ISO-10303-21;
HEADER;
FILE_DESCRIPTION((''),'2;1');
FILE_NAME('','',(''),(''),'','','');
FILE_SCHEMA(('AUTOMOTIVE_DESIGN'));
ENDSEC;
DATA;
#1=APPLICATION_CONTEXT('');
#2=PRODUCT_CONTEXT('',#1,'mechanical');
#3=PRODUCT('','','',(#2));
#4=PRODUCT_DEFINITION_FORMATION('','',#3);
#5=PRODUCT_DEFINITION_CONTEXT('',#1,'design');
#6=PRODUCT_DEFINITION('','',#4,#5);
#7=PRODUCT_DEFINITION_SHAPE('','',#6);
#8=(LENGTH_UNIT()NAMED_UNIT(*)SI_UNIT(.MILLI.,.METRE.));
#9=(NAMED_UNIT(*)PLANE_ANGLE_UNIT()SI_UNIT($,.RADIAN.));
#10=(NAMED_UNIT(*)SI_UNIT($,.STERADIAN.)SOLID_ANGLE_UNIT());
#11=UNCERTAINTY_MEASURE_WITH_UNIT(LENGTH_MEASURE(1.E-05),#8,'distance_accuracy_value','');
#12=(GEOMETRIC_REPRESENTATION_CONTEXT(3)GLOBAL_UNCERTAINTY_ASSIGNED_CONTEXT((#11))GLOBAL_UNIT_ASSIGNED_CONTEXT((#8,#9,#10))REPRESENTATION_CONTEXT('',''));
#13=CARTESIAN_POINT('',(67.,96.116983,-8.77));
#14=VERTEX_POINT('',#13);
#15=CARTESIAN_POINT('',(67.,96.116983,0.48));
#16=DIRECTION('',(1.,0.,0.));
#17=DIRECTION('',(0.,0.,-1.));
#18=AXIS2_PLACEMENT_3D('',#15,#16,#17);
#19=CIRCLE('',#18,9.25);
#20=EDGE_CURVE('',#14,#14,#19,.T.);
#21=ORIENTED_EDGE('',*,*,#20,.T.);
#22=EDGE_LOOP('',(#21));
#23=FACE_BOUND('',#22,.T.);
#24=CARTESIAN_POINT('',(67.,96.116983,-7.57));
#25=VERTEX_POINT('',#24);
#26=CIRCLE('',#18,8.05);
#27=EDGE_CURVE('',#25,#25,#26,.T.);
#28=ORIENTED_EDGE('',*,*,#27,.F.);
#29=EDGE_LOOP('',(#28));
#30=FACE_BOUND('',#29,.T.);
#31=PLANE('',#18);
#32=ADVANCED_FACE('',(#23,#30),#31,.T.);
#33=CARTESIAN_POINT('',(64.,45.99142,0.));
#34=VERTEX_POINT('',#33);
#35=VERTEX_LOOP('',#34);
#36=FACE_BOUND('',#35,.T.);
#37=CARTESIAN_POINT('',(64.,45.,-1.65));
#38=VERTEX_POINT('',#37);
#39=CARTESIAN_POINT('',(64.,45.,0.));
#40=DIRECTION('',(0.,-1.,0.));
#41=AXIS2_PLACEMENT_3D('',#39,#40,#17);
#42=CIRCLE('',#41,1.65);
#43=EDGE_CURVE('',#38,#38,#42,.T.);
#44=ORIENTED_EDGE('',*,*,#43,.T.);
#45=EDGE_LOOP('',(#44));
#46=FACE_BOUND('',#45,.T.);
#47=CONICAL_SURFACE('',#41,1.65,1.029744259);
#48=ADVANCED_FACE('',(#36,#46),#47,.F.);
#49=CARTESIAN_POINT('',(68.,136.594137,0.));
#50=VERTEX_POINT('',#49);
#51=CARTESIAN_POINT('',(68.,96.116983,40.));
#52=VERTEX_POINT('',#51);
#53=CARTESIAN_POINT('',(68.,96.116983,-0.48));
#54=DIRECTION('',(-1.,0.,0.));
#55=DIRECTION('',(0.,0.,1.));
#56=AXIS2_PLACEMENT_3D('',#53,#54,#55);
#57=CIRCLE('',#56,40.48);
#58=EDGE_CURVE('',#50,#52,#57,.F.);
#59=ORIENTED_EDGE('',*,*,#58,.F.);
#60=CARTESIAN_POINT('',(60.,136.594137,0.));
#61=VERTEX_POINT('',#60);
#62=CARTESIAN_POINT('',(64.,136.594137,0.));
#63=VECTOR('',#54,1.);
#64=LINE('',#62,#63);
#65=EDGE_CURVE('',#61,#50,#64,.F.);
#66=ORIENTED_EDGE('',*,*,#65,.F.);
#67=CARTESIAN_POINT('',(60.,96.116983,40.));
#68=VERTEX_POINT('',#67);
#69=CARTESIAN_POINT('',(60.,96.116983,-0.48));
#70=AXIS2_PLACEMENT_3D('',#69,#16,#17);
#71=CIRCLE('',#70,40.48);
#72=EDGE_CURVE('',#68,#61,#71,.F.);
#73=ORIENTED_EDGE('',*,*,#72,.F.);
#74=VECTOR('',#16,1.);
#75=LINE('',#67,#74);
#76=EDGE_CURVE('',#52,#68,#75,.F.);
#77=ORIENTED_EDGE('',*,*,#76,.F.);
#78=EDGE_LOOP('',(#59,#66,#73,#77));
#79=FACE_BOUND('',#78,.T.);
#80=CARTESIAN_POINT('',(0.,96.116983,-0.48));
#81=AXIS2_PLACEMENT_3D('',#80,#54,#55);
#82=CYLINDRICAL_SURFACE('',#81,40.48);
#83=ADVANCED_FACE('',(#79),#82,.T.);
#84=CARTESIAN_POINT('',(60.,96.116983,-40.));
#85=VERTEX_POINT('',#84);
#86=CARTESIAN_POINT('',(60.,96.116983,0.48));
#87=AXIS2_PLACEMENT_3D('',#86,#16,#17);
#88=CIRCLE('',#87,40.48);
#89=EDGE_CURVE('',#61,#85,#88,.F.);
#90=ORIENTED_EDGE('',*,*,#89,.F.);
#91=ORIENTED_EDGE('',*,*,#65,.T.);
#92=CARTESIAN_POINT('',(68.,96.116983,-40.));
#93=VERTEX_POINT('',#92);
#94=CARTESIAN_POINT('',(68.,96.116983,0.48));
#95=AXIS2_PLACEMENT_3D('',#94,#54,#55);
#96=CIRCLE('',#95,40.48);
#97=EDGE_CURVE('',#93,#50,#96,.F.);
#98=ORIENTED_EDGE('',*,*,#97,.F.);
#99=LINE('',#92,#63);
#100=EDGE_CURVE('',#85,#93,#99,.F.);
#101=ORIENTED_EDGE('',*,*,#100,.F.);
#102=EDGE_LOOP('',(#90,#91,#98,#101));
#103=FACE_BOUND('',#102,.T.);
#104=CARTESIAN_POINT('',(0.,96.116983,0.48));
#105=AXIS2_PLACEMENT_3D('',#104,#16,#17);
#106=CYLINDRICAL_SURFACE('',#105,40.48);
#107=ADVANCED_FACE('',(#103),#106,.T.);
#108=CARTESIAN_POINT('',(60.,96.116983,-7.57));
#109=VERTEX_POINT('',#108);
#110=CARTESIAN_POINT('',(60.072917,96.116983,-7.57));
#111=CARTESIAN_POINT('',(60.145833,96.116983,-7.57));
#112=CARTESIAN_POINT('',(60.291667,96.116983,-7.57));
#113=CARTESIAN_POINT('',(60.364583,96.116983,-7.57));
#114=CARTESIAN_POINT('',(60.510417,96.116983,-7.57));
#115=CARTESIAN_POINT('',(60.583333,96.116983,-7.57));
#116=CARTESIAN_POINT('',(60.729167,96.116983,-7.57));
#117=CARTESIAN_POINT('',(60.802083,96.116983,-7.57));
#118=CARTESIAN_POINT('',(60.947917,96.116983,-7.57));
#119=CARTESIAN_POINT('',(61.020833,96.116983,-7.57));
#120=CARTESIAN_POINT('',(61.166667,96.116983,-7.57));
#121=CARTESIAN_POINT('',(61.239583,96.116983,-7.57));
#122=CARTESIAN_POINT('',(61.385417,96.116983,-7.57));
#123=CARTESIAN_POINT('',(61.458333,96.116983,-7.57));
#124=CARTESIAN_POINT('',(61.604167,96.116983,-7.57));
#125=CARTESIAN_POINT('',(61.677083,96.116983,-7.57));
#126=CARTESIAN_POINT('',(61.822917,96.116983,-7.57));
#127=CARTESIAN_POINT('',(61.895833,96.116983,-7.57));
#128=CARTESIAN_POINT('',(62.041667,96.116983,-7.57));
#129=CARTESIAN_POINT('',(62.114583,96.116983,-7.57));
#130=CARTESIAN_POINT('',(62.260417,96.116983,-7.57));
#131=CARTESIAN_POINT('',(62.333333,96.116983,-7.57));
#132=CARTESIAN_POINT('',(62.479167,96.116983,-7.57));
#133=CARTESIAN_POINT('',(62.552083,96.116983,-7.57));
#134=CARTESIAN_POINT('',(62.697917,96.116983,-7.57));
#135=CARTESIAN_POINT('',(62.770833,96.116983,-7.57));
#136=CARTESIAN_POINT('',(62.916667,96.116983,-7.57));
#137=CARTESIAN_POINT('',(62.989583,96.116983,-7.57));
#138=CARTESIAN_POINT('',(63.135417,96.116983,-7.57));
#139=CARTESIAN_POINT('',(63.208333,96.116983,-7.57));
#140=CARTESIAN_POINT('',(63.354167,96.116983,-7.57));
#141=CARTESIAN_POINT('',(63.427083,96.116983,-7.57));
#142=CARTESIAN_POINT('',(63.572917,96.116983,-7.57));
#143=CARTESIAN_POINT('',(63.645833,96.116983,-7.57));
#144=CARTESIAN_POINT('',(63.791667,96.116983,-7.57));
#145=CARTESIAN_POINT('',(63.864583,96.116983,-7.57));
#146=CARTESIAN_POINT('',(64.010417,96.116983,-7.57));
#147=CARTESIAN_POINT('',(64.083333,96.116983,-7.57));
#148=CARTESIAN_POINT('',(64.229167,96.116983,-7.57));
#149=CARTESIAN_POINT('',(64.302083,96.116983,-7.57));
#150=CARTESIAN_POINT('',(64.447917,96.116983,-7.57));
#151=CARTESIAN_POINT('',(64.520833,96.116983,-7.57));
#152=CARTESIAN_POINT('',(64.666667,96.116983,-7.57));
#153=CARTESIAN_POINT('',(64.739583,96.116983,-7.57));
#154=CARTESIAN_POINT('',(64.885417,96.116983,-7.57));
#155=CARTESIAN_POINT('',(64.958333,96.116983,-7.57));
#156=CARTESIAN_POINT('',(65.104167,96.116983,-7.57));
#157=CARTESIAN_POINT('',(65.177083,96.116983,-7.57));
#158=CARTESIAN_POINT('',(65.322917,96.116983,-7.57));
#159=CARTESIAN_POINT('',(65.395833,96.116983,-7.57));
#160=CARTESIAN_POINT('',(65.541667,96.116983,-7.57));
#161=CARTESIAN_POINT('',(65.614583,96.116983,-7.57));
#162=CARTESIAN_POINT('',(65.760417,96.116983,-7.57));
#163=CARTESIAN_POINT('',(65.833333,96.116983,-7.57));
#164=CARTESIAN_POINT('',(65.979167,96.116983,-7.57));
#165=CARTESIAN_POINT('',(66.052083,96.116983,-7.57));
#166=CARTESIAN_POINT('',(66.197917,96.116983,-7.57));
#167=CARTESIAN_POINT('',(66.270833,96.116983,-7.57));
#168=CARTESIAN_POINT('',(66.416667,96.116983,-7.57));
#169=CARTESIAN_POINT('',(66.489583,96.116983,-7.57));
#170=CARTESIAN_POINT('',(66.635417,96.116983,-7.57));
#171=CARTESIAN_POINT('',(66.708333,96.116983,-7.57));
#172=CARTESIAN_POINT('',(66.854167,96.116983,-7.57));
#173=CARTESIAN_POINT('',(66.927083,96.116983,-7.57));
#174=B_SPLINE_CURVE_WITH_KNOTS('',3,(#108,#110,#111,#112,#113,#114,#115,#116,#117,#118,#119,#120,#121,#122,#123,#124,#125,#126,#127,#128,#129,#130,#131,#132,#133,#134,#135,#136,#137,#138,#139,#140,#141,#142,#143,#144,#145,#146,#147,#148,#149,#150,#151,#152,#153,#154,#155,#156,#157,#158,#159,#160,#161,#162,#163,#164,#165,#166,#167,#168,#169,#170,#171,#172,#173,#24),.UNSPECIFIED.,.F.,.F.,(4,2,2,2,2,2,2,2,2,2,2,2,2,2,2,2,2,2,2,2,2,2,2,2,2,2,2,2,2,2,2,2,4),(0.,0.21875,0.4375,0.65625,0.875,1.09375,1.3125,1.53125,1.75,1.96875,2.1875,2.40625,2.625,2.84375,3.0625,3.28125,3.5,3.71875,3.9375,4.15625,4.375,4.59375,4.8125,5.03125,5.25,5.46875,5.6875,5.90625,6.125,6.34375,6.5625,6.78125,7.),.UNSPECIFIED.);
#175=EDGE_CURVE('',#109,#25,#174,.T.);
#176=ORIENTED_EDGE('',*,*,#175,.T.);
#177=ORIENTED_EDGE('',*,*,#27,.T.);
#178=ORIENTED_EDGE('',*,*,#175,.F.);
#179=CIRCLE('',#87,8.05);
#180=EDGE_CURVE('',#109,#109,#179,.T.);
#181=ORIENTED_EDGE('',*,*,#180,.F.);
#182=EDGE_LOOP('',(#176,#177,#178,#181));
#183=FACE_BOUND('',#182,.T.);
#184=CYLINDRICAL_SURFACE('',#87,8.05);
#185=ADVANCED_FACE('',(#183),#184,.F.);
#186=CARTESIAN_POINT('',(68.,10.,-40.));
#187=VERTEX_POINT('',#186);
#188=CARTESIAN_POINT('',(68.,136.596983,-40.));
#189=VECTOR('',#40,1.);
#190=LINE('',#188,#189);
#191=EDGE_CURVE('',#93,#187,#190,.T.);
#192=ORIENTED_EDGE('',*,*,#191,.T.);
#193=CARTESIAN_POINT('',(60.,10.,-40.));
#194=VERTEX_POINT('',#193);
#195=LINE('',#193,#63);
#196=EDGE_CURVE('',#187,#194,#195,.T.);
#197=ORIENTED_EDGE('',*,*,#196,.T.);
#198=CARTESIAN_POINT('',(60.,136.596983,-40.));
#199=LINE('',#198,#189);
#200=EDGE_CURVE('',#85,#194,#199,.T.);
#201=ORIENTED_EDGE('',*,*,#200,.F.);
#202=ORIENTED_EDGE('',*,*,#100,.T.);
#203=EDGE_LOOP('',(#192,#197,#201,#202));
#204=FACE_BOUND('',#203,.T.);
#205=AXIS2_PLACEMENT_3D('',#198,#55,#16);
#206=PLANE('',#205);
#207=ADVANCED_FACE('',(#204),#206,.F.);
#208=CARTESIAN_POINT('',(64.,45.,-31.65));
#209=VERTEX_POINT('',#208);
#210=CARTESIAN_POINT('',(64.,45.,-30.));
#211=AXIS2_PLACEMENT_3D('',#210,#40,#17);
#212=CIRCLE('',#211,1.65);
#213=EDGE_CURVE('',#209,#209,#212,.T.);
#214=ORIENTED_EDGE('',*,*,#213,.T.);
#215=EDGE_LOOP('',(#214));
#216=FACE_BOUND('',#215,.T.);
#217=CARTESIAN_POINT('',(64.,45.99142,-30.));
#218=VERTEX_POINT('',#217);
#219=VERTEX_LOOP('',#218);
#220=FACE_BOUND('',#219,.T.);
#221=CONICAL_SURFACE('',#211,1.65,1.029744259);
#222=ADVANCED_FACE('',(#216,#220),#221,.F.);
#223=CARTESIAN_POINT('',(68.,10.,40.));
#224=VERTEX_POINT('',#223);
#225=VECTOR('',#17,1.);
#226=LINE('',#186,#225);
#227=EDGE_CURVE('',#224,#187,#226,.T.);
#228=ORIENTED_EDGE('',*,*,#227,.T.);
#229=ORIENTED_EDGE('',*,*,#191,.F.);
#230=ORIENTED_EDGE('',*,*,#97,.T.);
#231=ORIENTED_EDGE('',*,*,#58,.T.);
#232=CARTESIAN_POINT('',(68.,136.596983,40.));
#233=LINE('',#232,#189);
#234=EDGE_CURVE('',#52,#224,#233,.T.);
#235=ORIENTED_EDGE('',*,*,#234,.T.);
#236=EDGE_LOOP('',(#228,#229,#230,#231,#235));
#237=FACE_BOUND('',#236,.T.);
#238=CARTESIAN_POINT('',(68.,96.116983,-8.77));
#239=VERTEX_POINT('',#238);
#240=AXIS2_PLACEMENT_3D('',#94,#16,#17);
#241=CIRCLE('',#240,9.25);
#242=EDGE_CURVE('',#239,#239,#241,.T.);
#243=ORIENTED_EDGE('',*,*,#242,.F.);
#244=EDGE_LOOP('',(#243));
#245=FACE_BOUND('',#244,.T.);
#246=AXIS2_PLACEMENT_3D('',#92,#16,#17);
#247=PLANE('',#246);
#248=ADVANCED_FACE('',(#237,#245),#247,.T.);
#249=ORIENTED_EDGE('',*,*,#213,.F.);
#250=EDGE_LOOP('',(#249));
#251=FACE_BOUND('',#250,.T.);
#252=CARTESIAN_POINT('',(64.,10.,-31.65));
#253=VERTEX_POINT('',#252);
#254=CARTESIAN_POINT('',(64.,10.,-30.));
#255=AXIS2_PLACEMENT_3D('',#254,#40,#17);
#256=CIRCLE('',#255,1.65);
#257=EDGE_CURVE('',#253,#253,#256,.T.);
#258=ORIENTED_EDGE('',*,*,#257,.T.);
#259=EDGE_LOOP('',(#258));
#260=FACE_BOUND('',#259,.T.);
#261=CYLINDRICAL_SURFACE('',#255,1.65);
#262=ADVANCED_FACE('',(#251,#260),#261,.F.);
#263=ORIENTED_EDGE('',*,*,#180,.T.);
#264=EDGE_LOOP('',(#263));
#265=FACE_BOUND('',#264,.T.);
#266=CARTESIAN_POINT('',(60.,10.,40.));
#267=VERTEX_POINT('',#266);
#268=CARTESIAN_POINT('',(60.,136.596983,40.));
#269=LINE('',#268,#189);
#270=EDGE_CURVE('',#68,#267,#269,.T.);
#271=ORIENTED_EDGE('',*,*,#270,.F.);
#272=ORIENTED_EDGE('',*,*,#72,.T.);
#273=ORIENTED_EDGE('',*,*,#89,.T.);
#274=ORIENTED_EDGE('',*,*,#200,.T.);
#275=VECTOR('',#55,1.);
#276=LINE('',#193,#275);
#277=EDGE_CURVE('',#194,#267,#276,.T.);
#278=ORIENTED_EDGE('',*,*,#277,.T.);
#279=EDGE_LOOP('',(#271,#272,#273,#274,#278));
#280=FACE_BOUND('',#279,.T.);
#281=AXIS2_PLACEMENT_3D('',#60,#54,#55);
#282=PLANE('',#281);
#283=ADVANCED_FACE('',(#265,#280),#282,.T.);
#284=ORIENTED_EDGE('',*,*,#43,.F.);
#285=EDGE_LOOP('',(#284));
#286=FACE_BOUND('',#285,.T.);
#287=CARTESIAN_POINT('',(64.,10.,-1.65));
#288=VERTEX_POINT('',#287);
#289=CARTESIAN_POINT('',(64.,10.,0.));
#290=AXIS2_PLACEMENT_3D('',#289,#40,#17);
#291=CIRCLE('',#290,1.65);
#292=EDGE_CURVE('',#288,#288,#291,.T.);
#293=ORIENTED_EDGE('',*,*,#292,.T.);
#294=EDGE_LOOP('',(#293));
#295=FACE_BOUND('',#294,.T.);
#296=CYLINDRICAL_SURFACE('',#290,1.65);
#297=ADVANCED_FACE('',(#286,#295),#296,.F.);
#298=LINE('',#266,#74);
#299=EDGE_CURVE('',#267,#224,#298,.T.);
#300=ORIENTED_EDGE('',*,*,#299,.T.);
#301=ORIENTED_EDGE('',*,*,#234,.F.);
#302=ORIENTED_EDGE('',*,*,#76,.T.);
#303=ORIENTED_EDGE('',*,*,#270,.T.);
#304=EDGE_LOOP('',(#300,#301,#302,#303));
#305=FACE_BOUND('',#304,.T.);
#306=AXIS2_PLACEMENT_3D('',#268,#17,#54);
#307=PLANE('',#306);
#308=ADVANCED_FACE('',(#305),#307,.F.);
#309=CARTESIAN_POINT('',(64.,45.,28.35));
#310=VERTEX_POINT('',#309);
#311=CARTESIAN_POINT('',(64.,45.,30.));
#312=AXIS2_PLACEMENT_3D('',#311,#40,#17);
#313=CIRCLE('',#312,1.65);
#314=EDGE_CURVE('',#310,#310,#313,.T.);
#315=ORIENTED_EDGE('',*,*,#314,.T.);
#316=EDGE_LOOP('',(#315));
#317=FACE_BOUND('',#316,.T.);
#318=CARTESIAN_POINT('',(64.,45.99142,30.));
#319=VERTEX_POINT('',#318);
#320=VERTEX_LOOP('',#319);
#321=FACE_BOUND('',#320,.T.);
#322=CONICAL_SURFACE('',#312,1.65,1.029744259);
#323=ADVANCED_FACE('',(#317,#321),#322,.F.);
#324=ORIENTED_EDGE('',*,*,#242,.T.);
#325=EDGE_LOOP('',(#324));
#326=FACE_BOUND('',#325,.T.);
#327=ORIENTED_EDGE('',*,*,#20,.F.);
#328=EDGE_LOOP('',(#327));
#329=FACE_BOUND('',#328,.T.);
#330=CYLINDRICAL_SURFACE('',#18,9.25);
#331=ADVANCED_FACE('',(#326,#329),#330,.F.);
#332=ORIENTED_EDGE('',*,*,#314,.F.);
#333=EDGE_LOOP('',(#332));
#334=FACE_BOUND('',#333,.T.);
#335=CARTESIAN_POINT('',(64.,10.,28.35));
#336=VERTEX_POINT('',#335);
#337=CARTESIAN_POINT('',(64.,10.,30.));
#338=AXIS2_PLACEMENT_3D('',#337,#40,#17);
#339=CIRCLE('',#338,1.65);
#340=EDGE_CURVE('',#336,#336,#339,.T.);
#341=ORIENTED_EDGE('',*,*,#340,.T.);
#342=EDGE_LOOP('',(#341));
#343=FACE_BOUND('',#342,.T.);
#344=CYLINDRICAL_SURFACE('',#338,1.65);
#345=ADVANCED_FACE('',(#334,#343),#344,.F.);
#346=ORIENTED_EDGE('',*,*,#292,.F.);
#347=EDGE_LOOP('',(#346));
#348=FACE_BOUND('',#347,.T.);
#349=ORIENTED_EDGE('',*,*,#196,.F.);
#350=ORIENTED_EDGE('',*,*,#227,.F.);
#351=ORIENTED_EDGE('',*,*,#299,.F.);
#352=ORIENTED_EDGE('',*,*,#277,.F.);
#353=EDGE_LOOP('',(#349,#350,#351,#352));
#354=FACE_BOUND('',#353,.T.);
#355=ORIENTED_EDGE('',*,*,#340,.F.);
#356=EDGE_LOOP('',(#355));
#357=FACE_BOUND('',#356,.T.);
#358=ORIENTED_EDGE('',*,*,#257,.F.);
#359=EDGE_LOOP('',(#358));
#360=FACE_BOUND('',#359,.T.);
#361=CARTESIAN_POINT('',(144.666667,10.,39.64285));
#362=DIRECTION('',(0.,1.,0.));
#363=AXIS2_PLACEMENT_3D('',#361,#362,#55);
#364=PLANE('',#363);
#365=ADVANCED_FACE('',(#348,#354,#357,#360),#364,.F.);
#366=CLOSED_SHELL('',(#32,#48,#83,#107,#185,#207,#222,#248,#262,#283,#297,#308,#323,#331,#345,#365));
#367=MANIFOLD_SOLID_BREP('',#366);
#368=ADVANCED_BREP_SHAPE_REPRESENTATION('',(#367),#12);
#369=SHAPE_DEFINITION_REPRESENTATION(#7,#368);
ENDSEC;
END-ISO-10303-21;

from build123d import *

# Parameters (mm, degrees)
STOCK_NEW_TRACKER_1_START = 60
STOCK_NEW_TRACKER_1_DEPTH = 8
SKETCH1_R                 = 9.25
CUT_EXTRUDE1_DEPTH        = 1
SKETCH2_R                 = 8.05
CUT_EXTRUDE2_DEPTH        = 143.502485249
M4X0_7_TAPPED_HOLE1_D     = 3.3
M4X0_7_TAPPED_HOLE1_DEPTH = 35
M4X0_7_TAPPED_HOLE1_TIP   = 0.991420021


# Read off the part's stored shape, not the designer's step: Stock-New_Tracker-1
with BuildPart() as part:
    # Stock-New_Tracker-1 outline → Stock-New_Tracker-1 (new body)
    with BuildSketch(Plane.YZ.offset(STOCK_NEW_TRACKER_1_START)):
        with BuildLine():
            Line((10, 40), (10, -40))
            Line((10, -40), (96.116983094, -40))
            ThreePointArc((96.116983094, -40), (124.570453884, -28.312888011), (136.594137144, 0))
            ThreePointArc((136.594137144, 0), (124.570453884, 28.312888011), (96.116983094, 40))
            Line((96.116983094, 40), (10, 40))
        make_face()
    extrude(amount=STOCK_NEW_TRACKER_1_DEPTH)

    # Sketch1 → Cut-Extrude1 (cut)
    with BuildSketch(Plane(origin=(68, 0, 0), x_dir=(0, 0, -1), z_dir=(1, 0, 0))):
        with Locations((-0.48, 96.116983094)):
            Circle(SKETCH1_R)
    extrude(amount=-CUT_EXTRUDE1_DEPTH, mode=Mode.SUBTRACT)

    # Sketch2 → Cut-Extrude2 (cut, through all)
    with BuildSketch(Plane(origin=(67, 0, 0), x_dir=(0, 0, -1), z_dir=(1, 0, 0))):
        with Locations((-0.48, 96.116983094)):
            Circle(SKETCH2_R)
    extrude(amount=-CUT_EXTRUDE2_DEPTH, mode=Mode.SUBTRACT)

    # M4x0.7 Tapped Hole1
    with Locations(Plane(origin=(0, 10, 0), x_dir=(-1, 0, 0), z_dir=(0, -1, 0))):
        with Locations((-64, -30), (-64, 0), (-64, 30)):
            Hole(M4X0_7_TAPPED_HOLE1_D / 2, depth=M4X0_7_TAPPED_HOLE1_DEPTH)
            with Locations((0, 0, -(M4X0_7_TAPPED_HOLE1_DEPTH + M4X0_7_TAPPED_HOLE1_TIP / 2))):  # 118° drill point
                Cone(0, M4X0_7_TAPPED_HOLE1_D / 2, M4X0_7_TAPPED_HOLE1_TIP, mode=Mode.SUBTRACT)


solid = part.part
